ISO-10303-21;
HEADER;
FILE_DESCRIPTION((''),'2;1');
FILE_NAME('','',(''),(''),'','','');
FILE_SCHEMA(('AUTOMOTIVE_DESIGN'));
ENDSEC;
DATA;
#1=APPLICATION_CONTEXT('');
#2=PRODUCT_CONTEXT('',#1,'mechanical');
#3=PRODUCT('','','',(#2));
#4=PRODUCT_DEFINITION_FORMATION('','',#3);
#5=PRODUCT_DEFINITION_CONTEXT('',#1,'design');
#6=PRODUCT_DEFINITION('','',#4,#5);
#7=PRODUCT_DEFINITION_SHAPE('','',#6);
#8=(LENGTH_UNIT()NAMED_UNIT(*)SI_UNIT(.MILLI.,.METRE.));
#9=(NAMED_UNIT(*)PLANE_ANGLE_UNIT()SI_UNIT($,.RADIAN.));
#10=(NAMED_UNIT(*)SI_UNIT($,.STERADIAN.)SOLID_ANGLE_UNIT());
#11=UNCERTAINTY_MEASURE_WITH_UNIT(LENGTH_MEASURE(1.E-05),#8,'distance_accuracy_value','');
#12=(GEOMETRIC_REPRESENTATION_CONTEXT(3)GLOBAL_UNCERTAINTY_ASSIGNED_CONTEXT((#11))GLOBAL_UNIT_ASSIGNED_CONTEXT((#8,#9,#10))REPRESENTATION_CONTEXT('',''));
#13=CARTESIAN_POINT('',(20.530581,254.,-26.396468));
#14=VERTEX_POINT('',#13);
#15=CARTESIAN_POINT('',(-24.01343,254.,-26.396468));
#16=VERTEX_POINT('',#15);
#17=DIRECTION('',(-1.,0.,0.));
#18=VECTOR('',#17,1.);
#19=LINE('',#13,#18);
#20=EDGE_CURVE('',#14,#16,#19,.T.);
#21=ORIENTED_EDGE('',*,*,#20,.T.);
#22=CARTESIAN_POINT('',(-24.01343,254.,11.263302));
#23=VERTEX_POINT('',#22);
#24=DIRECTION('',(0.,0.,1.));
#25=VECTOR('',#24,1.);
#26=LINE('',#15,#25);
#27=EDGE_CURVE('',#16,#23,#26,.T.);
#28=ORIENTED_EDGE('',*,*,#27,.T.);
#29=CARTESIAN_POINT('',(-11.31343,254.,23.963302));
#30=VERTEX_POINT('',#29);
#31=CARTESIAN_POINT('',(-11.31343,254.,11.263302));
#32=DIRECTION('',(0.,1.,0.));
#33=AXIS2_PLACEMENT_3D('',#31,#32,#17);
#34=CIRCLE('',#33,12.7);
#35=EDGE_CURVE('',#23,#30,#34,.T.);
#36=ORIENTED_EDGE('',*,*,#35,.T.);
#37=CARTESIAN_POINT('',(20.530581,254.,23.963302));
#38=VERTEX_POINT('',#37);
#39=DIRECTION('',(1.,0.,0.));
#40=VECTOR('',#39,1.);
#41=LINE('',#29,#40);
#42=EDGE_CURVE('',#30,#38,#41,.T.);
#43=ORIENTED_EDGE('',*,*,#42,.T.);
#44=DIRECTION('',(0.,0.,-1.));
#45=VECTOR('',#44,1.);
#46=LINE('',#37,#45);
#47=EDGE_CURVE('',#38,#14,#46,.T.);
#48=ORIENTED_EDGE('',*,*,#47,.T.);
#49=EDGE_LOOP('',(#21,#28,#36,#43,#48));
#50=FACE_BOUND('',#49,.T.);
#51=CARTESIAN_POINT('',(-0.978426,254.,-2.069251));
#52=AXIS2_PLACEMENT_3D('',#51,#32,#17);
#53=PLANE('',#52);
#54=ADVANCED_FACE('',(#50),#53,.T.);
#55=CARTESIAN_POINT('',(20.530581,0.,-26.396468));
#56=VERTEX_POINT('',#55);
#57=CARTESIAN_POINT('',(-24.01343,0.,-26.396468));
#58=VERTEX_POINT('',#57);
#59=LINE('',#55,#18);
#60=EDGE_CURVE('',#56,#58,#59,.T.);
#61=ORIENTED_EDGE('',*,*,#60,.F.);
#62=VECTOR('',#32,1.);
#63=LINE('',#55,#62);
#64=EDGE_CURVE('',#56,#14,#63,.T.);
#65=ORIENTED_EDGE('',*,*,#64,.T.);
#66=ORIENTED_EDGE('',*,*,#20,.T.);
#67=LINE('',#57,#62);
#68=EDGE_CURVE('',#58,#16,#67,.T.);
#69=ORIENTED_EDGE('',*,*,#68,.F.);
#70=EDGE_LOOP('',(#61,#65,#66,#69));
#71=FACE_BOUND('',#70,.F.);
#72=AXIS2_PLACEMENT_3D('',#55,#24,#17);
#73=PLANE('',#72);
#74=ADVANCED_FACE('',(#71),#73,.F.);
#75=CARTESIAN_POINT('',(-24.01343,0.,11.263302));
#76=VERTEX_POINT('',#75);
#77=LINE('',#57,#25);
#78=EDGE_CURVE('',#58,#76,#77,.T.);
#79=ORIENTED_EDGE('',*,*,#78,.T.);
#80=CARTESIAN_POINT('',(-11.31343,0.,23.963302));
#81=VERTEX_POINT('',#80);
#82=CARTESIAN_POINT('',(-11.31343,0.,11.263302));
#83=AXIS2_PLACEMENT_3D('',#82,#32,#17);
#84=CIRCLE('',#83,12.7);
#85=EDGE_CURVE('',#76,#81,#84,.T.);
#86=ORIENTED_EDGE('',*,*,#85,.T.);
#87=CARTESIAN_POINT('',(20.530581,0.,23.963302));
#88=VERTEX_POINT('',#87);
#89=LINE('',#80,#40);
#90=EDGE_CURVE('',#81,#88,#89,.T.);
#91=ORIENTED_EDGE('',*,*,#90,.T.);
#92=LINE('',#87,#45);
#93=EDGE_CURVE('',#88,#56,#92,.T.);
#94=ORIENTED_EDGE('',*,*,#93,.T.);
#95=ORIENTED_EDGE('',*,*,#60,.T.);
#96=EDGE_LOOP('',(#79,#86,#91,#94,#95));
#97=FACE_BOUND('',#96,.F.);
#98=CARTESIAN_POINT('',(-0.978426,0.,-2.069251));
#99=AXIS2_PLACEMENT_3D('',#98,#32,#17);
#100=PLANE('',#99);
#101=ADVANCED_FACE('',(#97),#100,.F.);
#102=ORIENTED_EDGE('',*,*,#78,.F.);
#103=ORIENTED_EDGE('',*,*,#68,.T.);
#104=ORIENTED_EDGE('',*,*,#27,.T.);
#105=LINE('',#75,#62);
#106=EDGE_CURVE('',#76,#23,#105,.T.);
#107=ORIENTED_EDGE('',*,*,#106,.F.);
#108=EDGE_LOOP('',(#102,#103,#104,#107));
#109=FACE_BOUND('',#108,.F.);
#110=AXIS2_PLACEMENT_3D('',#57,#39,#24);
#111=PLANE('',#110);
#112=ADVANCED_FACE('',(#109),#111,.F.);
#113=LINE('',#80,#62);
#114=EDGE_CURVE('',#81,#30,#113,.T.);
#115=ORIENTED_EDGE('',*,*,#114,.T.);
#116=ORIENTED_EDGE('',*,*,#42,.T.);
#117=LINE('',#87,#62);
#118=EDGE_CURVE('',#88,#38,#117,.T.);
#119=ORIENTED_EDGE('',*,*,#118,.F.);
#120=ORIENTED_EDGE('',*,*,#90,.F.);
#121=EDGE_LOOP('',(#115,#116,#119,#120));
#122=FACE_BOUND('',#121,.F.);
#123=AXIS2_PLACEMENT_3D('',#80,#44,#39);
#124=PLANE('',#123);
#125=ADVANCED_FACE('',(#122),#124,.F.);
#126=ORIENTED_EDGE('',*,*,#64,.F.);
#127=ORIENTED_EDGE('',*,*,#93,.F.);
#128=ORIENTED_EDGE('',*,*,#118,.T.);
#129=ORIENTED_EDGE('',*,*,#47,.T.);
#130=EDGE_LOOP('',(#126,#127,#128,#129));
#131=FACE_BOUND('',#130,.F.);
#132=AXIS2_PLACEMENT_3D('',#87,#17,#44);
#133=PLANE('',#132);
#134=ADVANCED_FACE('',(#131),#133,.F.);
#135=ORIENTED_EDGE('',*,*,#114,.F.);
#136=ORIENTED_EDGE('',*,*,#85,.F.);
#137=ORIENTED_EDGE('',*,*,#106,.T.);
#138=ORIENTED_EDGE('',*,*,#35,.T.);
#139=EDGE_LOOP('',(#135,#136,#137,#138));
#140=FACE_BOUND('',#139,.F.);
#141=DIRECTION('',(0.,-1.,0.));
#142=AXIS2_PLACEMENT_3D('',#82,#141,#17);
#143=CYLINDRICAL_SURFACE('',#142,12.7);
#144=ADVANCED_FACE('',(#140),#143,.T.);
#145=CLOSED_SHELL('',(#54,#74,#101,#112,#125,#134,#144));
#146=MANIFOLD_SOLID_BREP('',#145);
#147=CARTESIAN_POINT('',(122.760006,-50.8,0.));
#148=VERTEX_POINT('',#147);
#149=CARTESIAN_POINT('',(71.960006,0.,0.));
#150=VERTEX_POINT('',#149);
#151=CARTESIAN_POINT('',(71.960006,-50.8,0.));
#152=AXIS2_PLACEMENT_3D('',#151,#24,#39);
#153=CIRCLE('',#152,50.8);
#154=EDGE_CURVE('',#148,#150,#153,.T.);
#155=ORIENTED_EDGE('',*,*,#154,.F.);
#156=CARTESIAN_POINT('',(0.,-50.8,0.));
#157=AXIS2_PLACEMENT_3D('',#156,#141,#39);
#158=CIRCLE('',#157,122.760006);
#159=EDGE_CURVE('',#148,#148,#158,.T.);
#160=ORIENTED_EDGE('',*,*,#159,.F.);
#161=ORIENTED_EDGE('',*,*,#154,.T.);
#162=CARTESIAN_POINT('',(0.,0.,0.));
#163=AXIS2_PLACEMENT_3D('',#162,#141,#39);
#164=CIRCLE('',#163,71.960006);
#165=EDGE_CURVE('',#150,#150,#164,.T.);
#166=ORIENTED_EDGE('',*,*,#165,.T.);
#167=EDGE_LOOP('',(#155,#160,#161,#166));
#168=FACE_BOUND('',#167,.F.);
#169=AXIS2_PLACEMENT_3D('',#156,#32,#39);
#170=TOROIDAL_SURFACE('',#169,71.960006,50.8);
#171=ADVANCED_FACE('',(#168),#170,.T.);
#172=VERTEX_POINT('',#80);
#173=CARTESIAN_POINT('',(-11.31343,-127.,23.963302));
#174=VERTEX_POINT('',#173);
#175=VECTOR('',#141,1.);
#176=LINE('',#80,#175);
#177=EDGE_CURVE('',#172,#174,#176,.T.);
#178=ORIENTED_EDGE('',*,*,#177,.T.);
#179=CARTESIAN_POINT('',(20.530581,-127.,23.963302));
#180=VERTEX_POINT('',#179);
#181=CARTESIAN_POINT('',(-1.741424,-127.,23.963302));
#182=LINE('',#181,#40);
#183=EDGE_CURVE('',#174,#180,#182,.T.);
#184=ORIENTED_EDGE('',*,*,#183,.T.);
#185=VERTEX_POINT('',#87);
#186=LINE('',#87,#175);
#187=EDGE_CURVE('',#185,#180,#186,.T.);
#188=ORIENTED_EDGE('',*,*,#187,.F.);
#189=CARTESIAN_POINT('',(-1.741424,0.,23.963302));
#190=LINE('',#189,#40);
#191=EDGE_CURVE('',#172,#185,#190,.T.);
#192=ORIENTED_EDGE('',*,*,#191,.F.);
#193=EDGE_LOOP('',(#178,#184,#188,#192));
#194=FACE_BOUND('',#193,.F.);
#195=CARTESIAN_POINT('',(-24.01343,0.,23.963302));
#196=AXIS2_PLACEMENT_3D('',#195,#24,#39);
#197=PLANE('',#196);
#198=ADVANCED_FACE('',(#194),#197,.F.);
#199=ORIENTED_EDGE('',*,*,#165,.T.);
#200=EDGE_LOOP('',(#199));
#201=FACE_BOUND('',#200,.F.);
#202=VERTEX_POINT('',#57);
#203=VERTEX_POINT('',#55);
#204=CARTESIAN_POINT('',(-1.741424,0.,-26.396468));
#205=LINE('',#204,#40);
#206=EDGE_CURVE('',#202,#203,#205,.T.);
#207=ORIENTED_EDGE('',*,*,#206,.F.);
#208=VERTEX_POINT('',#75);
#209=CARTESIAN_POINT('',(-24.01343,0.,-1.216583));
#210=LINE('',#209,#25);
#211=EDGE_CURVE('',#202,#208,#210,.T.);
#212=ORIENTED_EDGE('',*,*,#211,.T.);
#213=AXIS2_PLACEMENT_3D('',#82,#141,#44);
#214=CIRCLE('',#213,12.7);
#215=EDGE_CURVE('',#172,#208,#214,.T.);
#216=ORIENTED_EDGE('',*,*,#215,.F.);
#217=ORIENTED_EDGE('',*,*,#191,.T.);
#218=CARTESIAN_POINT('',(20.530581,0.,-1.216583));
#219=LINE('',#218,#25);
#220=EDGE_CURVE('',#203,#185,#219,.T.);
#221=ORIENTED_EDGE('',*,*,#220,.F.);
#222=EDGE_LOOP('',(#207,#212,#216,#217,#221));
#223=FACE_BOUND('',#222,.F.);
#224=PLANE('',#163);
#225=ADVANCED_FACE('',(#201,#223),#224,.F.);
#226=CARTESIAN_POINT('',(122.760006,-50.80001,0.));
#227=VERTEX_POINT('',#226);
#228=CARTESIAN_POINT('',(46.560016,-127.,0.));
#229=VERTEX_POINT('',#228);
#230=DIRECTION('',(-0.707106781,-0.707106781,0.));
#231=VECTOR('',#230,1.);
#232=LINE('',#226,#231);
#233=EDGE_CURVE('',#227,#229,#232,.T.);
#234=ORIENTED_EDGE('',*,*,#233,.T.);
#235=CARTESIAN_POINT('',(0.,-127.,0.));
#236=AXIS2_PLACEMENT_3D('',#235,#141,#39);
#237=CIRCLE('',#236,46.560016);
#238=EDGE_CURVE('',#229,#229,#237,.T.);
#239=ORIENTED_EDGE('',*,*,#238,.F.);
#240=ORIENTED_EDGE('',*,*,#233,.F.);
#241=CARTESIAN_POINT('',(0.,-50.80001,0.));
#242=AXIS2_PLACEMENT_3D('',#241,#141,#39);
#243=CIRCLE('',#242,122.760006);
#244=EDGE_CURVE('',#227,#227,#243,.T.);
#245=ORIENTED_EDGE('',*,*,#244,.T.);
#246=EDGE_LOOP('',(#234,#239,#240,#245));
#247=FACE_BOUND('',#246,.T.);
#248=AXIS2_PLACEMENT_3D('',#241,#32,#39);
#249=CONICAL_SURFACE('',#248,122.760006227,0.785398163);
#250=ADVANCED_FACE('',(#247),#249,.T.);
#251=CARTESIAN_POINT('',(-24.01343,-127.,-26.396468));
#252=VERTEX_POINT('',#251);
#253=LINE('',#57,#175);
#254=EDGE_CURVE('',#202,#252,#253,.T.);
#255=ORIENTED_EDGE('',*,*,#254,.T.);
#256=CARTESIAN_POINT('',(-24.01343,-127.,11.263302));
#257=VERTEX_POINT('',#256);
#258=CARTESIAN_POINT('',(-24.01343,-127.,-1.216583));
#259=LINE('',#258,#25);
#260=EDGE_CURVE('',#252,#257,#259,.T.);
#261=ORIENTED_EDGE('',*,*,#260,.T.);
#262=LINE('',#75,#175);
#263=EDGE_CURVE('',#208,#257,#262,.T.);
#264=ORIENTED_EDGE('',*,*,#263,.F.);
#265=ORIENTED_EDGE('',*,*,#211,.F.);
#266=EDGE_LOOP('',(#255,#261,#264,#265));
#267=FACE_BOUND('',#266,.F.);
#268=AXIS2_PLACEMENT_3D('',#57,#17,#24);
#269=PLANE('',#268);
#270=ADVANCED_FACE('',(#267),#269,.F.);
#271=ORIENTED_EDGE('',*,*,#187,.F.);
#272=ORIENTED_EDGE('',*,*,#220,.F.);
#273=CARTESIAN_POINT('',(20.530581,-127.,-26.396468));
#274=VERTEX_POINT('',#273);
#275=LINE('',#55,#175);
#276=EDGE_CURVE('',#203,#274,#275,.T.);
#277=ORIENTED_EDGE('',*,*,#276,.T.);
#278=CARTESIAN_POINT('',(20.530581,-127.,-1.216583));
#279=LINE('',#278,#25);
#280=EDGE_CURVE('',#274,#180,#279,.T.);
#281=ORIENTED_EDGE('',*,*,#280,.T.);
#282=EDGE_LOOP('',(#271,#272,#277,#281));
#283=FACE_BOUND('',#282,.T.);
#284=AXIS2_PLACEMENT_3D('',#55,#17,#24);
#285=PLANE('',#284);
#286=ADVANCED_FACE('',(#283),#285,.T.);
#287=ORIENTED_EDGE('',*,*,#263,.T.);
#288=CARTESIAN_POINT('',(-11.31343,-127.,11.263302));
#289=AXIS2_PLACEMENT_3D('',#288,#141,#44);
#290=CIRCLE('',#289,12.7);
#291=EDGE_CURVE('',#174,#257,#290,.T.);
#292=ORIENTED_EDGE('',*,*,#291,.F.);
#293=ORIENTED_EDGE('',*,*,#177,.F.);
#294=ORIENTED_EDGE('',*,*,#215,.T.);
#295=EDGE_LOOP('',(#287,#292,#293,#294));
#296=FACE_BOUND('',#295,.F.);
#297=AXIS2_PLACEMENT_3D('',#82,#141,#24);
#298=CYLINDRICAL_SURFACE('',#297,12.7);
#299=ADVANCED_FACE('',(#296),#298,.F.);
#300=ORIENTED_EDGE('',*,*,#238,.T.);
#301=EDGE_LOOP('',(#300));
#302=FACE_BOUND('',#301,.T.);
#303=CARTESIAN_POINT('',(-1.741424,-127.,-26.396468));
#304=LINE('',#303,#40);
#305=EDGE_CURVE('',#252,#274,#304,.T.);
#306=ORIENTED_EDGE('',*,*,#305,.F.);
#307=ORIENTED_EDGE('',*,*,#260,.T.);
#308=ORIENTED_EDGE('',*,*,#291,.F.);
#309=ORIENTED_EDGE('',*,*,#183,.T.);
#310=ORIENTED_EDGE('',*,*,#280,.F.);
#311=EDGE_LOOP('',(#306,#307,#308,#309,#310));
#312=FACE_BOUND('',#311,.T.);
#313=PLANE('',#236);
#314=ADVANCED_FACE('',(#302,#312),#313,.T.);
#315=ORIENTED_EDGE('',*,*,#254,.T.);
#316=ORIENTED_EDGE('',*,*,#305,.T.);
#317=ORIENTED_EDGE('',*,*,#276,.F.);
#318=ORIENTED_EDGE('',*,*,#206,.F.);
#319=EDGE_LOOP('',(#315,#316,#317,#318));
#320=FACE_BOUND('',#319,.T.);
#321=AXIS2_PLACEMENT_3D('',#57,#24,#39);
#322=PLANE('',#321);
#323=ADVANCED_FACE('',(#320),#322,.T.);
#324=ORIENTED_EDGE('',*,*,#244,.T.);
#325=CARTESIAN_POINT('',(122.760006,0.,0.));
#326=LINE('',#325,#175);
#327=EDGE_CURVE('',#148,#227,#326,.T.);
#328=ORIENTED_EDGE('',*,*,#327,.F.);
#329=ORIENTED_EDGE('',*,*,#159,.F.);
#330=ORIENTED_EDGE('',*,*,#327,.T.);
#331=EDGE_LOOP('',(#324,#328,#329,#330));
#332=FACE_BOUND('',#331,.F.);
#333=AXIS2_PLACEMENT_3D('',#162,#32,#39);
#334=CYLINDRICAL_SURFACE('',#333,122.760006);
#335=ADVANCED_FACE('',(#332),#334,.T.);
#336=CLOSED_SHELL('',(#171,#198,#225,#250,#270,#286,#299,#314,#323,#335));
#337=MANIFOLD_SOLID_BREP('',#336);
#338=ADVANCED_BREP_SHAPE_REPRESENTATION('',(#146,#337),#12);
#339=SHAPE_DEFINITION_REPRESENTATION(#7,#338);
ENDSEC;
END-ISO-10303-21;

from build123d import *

# Parameters (mm, degrees)
F0_R     = 122.7600062275
F0_W     = 44.5440113544
F0_H     = 50.3597706556
F1_DEPTH = 127
F2_R     = 50.8
F3_SIZE  = 76.19999
F4_R     = 12.7
F6_DEPTH = 254


# Not quite as in the source:
# - a fillet or chamfer is up to 0.001 mm smaller than in the source, because OpenCascade refuses the exact size


with BuildPart() as f1:
    # F0 (on Front) → F1 (new body)
    with BuildSketch(Plane.XZ):
        Circle(F0_R)
        with Locations((-1.7414242029, -1.2165829539)):
            Rectangle(F0_W, F0_H, mode=Mode.SUBTRACT)
    extrude(amount=F1_DEPTH)

    # F2
    f2_edges = [f1.edges().sort_by_distance(p)[0] for p in [
        (-122.760006, 0, 0),
    ]]
    fillet(f2_edges, radius=F2_R)

    # F3 (size 76.2 in the source; OpenCascade refuses exactly that, so slightly less here)
    f3_edges = [f1.edges().sort_by_distance(p)[0] for p in [
        (-122.760006, -127, 0),
    ]]
    chamfer(f3_edges, length=F3_SIZE)

    # F4
    f4_edges = [f1.edges().sort_by_distance(p)[0] for p in [
        (-24.01343, -63.5, 23.963302),
    ]]
    fillet(f4_edges, radius=F4_R)


with BuildPart() as f6:
    # F5 (on face) → F6 (new body)
    with BuildSketch(Plane(origin=(0, 0, 0), x_dir=(-1, 0, 0), z_dir=(0, 1, 0))):
        with BuildLine():
            Line((24.0134298801, -26.3964682817), (24.0134298801, 11.2633023739))
            ThreePointArc((24.0134298801, 11.2633023739), (20.2936860012, 20.243558495), (11.3134298801, 23.9633023739))
            Line((11.3134298801, 23.9633023739), (-20.5305814743, 23.9633023739))
            Line((-20.5305814743, 23.9633023739), (-20.5305814743, -26.3964682817))
            Line((-20.5305814743, -26.3964682817), (24.0134298801, -26.3964682817))
        make_face()
    extrude(amount=F6_DEPTH)


solid = Compound([f1.part, f6.part])
